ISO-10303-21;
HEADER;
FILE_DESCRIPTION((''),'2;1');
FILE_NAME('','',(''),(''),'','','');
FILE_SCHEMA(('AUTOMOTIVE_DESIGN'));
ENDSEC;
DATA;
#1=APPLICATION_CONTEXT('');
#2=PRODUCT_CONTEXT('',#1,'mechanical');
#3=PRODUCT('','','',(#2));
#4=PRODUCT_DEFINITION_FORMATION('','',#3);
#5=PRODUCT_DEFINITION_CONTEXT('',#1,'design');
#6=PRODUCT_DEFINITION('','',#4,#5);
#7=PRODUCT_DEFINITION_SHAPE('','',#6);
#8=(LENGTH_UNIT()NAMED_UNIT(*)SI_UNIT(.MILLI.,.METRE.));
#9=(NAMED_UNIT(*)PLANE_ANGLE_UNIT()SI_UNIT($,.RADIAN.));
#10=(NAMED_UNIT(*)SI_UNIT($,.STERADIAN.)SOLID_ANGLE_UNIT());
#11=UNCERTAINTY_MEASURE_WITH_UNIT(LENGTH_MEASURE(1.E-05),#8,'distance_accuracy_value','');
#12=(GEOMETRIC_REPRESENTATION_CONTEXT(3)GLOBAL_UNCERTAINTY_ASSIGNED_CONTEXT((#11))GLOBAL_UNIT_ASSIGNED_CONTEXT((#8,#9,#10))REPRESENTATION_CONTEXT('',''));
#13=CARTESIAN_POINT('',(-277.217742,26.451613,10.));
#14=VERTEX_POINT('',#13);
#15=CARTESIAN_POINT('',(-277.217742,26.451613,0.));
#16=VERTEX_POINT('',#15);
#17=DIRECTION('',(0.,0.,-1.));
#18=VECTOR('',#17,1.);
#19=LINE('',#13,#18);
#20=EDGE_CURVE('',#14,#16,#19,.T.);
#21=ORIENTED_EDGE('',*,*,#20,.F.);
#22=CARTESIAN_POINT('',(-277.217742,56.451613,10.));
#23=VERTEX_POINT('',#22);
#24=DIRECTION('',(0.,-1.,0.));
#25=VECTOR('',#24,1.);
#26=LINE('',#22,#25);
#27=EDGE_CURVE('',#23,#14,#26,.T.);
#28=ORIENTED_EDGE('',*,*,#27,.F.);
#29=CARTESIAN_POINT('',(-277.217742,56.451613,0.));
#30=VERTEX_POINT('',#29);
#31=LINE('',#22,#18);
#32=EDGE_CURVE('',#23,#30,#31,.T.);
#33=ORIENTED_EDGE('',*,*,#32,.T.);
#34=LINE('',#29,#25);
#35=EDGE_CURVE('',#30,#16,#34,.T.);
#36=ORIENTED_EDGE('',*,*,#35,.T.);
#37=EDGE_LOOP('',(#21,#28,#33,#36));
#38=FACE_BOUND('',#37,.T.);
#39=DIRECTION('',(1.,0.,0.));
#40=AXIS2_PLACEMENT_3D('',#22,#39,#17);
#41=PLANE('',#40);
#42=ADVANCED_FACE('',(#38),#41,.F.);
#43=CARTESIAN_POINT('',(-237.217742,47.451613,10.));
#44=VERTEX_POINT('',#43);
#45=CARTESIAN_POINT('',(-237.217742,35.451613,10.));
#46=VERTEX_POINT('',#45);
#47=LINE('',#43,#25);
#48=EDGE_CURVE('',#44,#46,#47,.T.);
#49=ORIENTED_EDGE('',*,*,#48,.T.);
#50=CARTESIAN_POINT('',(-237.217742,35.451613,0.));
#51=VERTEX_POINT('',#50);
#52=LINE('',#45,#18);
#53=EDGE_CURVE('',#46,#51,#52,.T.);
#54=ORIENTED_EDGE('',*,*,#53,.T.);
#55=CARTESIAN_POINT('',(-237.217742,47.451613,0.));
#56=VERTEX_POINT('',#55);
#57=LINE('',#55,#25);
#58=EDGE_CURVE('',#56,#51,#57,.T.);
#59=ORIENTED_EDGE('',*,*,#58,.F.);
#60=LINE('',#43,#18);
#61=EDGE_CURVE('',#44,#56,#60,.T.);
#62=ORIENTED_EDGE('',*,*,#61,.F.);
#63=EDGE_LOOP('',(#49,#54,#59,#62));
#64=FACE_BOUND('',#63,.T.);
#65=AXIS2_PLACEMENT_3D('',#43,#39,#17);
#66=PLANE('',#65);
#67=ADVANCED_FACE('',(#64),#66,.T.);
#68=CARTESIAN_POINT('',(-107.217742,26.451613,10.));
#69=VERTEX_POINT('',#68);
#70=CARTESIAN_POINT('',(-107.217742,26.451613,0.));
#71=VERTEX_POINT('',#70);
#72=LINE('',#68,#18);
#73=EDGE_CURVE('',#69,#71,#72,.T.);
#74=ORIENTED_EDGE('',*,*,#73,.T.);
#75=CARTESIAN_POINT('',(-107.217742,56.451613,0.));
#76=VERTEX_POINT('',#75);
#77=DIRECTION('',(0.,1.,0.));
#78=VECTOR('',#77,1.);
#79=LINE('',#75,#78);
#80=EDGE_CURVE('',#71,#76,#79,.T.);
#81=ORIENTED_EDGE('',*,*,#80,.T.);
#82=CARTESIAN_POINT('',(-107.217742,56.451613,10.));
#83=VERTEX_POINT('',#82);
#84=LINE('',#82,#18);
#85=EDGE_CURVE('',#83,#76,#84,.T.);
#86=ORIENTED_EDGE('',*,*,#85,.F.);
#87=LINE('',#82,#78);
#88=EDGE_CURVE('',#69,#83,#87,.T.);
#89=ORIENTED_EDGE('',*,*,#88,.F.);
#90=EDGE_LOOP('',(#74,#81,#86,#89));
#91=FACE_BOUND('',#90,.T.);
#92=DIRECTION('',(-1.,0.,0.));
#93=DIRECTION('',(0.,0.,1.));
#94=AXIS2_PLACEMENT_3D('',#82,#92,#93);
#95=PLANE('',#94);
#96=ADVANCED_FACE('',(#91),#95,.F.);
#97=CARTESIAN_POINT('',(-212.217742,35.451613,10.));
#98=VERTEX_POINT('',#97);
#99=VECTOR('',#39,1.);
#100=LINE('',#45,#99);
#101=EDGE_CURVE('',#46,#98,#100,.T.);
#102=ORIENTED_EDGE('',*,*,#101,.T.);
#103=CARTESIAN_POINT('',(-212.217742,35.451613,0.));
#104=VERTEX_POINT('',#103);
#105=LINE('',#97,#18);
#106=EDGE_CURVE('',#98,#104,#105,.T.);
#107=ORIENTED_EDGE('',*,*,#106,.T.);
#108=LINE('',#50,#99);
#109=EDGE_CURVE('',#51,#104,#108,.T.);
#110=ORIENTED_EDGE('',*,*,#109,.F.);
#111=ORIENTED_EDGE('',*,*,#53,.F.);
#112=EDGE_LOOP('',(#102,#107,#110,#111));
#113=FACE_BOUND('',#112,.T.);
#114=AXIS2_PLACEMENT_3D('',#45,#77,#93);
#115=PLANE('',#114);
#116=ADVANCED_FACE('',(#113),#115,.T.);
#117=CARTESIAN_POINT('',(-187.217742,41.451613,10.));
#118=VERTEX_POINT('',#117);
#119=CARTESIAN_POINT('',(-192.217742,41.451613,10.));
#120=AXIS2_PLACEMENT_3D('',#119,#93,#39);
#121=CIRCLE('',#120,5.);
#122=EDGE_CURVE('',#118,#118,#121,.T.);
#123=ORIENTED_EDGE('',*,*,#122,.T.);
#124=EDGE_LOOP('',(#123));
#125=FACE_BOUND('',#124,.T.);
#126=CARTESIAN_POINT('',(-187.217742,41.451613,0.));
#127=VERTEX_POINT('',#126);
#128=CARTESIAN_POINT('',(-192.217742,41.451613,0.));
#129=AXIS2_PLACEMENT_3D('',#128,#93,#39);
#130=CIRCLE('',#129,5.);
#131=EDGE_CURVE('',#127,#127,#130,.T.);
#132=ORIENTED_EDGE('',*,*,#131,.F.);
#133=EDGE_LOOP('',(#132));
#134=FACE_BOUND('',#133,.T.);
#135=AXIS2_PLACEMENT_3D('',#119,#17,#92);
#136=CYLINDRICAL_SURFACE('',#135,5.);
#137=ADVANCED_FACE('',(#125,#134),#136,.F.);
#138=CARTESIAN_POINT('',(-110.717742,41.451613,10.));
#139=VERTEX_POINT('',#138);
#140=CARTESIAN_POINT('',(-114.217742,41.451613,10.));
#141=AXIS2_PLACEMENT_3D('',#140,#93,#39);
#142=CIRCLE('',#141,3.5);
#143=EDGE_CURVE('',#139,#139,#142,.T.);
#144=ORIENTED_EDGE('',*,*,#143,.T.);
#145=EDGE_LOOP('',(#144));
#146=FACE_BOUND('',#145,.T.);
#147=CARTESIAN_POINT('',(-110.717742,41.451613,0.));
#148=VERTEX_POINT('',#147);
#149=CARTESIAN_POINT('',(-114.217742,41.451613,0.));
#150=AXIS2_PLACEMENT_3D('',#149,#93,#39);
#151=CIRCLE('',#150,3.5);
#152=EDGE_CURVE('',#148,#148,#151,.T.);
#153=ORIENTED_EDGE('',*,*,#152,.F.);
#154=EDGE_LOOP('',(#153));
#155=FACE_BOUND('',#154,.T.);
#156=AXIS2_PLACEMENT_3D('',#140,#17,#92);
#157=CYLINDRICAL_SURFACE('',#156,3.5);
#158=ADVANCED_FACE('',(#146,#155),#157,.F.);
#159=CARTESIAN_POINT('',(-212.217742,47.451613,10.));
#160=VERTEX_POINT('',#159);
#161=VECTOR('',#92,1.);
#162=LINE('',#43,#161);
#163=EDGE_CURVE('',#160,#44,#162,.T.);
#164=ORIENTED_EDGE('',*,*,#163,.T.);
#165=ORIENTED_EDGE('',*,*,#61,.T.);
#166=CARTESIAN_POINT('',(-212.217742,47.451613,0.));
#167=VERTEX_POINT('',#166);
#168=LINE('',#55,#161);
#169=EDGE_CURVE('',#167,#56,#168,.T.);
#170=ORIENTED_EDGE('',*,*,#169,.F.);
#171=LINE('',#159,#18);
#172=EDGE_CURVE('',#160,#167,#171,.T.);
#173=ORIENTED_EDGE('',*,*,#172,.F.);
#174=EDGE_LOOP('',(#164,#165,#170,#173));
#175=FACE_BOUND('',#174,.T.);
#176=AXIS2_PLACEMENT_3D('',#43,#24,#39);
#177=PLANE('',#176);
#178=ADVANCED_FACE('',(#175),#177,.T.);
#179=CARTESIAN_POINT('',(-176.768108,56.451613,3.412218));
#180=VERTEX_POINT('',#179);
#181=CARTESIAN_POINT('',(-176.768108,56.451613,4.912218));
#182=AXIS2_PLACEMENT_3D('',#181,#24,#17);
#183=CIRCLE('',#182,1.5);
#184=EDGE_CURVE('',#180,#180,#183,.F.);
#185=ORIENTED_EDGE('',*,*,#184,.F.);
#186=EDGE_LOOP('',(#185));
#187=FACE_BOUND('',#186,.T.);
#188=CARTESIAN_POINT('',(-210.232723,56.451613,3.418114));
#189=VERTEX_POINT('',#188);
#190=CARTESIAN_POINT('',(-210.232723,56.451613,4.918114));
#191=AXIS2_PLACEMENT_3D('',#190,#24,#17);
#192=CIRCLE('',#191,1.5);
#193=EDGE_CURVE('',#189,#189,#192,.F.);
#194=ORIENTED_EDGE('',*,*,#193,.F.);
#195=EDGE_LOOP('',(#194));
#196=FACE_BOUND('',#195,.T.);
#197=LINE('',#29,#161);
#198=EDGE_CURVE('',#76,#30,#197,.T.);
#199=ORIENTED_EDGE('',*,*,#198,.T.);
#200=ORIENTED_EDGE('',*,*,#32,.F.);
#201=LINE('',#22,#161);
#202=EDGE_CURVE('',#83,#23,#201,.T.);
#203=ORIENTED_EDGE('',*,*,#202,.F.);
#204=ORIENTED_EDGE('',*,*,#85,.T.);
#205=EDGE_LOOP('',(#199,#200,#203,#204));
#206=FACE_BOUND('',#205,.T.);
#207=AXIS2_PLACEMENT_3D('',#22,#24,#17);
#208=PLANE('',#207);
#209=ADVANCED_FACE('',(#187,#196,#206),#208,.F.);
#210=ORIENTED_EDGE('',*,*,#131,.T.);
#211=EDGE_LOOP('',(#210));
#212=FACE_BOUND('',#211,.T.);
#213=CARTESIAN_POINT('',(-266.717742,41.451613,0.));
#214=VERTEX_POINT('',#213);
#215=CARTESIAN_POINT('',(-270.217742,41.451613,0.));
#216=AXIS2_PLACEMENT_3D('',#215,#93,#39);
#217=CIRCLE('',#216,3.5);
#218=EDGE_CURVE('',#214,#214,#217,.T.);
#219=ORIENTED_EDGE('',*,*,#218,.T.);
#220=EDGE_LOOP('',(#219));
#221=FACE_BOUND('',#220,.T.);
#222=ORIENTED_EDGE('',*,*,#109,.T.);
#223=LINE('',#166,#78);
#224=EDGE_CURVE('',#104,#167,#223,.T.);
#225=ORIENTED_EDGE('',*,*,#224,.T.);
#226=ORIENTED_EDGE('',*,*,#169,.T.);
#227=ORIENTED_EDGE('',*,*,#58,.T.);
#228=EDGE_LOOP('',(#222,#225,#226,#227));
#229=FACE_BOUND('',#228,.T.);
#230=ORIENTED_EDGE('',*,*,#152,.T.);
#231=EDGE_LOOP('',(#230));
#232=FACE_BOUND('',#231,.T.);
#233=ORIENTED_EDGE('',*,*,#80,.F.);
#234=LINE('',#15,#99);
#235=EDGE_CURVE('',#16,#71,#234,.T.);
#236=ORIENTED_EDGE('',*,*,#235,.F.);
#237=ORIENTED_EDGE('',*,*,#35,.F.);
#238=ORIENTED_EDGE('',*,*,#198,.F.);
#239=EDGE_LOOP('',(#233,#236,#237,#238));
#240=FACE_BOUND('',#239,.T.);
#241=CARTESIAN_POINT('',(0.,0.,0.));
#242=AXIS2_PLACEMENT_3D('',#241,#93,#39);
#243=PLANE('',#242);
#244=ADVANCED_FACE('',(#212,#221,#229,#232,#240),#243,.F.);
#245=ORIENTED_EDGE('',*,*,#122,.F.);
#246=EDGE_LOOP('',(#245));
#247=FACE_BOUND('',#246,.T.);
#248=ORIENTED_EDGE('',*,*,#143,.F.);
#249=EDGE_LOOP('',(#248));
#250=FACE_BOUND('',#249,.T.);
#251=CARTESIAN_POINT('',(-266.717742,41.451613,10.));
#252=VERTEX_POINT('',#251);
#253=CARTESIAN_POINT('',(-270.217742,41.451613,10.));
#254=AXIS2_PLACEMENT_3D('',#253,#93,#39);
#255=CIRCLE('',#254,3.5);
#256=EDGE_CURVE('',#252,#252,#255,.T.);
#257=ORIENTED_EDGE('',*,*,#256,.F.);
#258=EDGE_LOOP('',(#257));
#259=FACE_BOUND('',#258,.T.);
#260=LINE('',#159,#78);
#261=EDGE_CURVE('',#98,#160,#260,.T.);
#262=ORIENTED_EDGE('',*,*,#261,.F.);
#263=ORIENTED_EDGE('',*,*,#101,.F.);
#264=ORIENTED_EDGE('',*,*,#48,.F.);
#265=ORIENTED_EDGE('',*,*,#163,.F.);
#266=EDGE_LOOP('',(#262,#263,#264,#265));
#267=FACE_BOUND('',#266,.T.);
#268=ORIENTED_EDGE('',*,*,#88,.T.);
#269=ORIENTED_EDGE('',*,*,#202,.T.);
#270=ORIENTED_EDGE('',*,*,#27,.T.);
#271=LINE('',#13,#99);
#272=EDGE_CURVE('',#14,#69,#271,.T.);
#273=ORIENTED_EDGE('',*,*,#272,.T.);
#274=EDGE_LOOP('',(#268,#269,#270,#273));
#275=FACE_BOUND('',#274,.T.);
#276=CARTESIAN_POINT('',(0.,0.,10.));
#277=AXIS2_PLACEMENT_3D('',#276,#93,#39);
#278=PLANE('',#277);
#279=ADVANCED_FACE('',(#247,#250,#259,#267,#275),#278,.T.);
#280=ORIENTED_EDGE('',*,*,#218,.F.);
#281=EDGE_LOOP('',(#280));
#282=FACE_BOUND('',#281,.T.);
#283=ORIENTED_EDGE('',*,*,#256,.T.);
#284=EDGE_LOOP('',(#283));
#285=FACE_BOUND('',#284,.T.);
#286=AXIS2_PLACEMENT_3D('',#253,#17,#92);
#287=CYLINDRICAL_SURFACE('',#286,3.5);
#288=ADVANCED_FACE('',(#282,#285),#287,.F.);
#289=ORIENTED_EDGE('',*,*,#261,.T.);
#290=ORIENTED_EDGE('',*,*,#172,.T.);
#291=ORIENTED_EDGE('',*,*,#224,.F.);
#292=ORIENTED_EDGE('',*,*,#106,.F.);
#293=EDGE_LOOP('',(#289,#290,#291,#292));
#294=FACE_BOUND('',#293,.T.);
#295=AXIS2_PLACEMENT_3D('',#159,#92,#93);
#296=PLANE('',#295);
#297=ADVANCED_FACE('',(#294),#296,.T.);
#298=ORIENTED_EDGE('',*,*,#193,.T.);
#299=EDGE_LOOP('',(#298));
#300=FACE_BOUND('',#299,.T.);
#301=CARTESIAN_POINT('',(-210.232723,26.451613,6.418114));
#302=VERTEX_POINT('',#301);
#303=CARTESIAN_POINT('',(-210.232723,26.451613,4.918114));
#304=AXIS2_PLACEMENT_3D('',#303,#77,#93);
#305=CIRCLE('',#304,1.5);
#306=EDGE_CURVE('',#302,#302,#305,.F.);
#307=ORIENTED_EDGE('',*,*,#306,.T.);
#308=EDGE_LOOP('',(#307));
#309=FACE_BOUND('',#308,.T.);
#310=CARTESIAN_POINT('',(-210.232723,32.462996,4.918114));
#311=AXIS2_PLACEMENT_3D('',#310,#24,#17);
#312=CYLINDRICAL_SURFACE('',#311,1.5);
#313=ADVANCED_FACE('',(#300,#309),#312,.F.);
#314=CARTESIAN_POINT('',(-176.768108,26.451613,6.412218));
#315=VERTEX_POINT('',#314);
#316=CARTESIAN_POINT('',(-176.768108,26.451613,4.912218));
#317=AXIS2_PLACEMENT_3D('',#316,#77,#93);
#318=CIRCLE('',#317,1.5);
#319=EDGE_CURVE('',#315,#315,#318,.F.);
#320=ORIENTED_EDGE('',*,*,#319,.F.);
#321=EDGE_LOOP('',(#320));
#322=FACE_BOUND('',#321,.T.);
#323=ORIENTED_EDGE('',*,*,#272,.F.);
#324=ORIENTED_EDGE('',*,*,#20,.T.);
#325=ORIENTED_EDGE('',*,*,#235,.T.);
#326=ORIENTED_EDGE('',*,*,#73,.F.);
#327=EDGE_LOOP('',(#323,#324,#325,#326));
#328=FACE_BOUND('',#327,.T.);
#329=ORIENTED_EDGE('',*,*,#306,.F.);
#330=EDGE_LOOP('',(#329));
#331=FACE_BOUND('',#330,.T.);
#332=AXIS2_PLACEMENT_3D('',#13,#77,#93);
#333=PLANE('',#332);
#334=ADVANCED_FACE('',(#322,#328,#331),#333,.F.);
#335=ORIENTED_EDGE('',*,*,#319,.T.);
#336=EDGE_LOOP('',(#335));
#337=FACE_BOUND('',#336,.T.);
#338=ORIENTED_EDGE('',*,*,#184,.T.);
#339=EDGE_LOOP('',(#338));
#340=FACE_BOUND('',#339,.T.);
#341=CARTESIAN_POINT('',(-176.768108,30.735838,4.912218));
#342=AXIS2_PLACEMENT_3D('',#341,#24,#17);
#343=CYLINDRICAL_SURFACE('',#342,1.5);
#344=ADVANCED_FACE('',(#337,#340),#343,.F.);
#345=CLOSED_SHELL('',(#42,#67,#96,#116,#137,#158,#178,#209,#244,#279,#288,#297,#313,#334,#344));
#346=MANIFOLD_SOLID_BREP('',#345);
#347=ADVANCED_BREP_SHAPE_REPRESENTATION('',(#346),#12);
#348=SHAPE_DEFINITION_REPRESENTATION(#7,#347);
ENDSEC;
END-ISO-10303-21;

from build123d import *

# Parameters (mm, degrees)
ESBO_O1_W                 = 170
ESBO_O1_H                 = 30
ESBO_O1_R                 = 5
ESBO_O1_R_2               = 3.5
ESBO_O1_W_2               = 25
ESBO_O1_H_2               = 12
RESSALTO_EXTRUS_O1_DEPTH  = 10
CORTE_EXTRUS_O1_START     = 26.451612903
CORTE_EXTRUS_O1_OUTLINE_R = 1.5
CORTE_EXTRUS_O1_DEPTH     = 30


# Read off the part's stored shape, not the designer's step: Corte-extrusão1
with BuildPart() as part:
    # Esboço1 → Ressalto-extrusão1 (new body)
    with BuildSketch(Plane.XY):
        with Locations((-192.217741935, 41.451612903)):
            Rectangle(ESBO_O1_W, ESBO_O1_H)
        with Locations((-192.217741935, 41.451612903)):
            Circle(ESBO_O1_R, mode=Mode.SUBTRACT)
        with Locations((-270.217741935, 41.451612903)):
            Circle(ESBO_O1_R_2, mode=Mode.SUBTRACT)
        with Locations((-114.217741935, 41.451612903)):
            Circle(ESBO_O1_R_2, mode=Mode.SUBTRACT)
        with Locations((-224.717741935, 41.451612903)):
            Rectangle(ESBO_O1_W_2, ESBO_O1_H_2, mode=Mode.SUBTRACT)
    extrude(amount=RESSALTO_EXTRUS_O1_DEPTH)

    # Corte-extrusão1 outline → Corte-extrusão1 (cut)
    with BuildSketch(Plane(origin=(0, 0, 0), x_dir=(1, 0, 0), z_dir=(0, 1, 0)).offset(CORTE_EXTRUS_O1_START)):
        with Locations((-210.23272287, -4.918113723)):
            Circle(CORTE_EXTRUS_O1_OUTLINE_R)
        with Locations((-176.768107745, -4.912217988)):
            Circle(CORTE_EXTRUS_O1_OUTLINE_R)
    extrude(amount=CORTE_EXTRUS_O1_DEPTH, mode=Mode.SUBTRACT)


solid = part.part
